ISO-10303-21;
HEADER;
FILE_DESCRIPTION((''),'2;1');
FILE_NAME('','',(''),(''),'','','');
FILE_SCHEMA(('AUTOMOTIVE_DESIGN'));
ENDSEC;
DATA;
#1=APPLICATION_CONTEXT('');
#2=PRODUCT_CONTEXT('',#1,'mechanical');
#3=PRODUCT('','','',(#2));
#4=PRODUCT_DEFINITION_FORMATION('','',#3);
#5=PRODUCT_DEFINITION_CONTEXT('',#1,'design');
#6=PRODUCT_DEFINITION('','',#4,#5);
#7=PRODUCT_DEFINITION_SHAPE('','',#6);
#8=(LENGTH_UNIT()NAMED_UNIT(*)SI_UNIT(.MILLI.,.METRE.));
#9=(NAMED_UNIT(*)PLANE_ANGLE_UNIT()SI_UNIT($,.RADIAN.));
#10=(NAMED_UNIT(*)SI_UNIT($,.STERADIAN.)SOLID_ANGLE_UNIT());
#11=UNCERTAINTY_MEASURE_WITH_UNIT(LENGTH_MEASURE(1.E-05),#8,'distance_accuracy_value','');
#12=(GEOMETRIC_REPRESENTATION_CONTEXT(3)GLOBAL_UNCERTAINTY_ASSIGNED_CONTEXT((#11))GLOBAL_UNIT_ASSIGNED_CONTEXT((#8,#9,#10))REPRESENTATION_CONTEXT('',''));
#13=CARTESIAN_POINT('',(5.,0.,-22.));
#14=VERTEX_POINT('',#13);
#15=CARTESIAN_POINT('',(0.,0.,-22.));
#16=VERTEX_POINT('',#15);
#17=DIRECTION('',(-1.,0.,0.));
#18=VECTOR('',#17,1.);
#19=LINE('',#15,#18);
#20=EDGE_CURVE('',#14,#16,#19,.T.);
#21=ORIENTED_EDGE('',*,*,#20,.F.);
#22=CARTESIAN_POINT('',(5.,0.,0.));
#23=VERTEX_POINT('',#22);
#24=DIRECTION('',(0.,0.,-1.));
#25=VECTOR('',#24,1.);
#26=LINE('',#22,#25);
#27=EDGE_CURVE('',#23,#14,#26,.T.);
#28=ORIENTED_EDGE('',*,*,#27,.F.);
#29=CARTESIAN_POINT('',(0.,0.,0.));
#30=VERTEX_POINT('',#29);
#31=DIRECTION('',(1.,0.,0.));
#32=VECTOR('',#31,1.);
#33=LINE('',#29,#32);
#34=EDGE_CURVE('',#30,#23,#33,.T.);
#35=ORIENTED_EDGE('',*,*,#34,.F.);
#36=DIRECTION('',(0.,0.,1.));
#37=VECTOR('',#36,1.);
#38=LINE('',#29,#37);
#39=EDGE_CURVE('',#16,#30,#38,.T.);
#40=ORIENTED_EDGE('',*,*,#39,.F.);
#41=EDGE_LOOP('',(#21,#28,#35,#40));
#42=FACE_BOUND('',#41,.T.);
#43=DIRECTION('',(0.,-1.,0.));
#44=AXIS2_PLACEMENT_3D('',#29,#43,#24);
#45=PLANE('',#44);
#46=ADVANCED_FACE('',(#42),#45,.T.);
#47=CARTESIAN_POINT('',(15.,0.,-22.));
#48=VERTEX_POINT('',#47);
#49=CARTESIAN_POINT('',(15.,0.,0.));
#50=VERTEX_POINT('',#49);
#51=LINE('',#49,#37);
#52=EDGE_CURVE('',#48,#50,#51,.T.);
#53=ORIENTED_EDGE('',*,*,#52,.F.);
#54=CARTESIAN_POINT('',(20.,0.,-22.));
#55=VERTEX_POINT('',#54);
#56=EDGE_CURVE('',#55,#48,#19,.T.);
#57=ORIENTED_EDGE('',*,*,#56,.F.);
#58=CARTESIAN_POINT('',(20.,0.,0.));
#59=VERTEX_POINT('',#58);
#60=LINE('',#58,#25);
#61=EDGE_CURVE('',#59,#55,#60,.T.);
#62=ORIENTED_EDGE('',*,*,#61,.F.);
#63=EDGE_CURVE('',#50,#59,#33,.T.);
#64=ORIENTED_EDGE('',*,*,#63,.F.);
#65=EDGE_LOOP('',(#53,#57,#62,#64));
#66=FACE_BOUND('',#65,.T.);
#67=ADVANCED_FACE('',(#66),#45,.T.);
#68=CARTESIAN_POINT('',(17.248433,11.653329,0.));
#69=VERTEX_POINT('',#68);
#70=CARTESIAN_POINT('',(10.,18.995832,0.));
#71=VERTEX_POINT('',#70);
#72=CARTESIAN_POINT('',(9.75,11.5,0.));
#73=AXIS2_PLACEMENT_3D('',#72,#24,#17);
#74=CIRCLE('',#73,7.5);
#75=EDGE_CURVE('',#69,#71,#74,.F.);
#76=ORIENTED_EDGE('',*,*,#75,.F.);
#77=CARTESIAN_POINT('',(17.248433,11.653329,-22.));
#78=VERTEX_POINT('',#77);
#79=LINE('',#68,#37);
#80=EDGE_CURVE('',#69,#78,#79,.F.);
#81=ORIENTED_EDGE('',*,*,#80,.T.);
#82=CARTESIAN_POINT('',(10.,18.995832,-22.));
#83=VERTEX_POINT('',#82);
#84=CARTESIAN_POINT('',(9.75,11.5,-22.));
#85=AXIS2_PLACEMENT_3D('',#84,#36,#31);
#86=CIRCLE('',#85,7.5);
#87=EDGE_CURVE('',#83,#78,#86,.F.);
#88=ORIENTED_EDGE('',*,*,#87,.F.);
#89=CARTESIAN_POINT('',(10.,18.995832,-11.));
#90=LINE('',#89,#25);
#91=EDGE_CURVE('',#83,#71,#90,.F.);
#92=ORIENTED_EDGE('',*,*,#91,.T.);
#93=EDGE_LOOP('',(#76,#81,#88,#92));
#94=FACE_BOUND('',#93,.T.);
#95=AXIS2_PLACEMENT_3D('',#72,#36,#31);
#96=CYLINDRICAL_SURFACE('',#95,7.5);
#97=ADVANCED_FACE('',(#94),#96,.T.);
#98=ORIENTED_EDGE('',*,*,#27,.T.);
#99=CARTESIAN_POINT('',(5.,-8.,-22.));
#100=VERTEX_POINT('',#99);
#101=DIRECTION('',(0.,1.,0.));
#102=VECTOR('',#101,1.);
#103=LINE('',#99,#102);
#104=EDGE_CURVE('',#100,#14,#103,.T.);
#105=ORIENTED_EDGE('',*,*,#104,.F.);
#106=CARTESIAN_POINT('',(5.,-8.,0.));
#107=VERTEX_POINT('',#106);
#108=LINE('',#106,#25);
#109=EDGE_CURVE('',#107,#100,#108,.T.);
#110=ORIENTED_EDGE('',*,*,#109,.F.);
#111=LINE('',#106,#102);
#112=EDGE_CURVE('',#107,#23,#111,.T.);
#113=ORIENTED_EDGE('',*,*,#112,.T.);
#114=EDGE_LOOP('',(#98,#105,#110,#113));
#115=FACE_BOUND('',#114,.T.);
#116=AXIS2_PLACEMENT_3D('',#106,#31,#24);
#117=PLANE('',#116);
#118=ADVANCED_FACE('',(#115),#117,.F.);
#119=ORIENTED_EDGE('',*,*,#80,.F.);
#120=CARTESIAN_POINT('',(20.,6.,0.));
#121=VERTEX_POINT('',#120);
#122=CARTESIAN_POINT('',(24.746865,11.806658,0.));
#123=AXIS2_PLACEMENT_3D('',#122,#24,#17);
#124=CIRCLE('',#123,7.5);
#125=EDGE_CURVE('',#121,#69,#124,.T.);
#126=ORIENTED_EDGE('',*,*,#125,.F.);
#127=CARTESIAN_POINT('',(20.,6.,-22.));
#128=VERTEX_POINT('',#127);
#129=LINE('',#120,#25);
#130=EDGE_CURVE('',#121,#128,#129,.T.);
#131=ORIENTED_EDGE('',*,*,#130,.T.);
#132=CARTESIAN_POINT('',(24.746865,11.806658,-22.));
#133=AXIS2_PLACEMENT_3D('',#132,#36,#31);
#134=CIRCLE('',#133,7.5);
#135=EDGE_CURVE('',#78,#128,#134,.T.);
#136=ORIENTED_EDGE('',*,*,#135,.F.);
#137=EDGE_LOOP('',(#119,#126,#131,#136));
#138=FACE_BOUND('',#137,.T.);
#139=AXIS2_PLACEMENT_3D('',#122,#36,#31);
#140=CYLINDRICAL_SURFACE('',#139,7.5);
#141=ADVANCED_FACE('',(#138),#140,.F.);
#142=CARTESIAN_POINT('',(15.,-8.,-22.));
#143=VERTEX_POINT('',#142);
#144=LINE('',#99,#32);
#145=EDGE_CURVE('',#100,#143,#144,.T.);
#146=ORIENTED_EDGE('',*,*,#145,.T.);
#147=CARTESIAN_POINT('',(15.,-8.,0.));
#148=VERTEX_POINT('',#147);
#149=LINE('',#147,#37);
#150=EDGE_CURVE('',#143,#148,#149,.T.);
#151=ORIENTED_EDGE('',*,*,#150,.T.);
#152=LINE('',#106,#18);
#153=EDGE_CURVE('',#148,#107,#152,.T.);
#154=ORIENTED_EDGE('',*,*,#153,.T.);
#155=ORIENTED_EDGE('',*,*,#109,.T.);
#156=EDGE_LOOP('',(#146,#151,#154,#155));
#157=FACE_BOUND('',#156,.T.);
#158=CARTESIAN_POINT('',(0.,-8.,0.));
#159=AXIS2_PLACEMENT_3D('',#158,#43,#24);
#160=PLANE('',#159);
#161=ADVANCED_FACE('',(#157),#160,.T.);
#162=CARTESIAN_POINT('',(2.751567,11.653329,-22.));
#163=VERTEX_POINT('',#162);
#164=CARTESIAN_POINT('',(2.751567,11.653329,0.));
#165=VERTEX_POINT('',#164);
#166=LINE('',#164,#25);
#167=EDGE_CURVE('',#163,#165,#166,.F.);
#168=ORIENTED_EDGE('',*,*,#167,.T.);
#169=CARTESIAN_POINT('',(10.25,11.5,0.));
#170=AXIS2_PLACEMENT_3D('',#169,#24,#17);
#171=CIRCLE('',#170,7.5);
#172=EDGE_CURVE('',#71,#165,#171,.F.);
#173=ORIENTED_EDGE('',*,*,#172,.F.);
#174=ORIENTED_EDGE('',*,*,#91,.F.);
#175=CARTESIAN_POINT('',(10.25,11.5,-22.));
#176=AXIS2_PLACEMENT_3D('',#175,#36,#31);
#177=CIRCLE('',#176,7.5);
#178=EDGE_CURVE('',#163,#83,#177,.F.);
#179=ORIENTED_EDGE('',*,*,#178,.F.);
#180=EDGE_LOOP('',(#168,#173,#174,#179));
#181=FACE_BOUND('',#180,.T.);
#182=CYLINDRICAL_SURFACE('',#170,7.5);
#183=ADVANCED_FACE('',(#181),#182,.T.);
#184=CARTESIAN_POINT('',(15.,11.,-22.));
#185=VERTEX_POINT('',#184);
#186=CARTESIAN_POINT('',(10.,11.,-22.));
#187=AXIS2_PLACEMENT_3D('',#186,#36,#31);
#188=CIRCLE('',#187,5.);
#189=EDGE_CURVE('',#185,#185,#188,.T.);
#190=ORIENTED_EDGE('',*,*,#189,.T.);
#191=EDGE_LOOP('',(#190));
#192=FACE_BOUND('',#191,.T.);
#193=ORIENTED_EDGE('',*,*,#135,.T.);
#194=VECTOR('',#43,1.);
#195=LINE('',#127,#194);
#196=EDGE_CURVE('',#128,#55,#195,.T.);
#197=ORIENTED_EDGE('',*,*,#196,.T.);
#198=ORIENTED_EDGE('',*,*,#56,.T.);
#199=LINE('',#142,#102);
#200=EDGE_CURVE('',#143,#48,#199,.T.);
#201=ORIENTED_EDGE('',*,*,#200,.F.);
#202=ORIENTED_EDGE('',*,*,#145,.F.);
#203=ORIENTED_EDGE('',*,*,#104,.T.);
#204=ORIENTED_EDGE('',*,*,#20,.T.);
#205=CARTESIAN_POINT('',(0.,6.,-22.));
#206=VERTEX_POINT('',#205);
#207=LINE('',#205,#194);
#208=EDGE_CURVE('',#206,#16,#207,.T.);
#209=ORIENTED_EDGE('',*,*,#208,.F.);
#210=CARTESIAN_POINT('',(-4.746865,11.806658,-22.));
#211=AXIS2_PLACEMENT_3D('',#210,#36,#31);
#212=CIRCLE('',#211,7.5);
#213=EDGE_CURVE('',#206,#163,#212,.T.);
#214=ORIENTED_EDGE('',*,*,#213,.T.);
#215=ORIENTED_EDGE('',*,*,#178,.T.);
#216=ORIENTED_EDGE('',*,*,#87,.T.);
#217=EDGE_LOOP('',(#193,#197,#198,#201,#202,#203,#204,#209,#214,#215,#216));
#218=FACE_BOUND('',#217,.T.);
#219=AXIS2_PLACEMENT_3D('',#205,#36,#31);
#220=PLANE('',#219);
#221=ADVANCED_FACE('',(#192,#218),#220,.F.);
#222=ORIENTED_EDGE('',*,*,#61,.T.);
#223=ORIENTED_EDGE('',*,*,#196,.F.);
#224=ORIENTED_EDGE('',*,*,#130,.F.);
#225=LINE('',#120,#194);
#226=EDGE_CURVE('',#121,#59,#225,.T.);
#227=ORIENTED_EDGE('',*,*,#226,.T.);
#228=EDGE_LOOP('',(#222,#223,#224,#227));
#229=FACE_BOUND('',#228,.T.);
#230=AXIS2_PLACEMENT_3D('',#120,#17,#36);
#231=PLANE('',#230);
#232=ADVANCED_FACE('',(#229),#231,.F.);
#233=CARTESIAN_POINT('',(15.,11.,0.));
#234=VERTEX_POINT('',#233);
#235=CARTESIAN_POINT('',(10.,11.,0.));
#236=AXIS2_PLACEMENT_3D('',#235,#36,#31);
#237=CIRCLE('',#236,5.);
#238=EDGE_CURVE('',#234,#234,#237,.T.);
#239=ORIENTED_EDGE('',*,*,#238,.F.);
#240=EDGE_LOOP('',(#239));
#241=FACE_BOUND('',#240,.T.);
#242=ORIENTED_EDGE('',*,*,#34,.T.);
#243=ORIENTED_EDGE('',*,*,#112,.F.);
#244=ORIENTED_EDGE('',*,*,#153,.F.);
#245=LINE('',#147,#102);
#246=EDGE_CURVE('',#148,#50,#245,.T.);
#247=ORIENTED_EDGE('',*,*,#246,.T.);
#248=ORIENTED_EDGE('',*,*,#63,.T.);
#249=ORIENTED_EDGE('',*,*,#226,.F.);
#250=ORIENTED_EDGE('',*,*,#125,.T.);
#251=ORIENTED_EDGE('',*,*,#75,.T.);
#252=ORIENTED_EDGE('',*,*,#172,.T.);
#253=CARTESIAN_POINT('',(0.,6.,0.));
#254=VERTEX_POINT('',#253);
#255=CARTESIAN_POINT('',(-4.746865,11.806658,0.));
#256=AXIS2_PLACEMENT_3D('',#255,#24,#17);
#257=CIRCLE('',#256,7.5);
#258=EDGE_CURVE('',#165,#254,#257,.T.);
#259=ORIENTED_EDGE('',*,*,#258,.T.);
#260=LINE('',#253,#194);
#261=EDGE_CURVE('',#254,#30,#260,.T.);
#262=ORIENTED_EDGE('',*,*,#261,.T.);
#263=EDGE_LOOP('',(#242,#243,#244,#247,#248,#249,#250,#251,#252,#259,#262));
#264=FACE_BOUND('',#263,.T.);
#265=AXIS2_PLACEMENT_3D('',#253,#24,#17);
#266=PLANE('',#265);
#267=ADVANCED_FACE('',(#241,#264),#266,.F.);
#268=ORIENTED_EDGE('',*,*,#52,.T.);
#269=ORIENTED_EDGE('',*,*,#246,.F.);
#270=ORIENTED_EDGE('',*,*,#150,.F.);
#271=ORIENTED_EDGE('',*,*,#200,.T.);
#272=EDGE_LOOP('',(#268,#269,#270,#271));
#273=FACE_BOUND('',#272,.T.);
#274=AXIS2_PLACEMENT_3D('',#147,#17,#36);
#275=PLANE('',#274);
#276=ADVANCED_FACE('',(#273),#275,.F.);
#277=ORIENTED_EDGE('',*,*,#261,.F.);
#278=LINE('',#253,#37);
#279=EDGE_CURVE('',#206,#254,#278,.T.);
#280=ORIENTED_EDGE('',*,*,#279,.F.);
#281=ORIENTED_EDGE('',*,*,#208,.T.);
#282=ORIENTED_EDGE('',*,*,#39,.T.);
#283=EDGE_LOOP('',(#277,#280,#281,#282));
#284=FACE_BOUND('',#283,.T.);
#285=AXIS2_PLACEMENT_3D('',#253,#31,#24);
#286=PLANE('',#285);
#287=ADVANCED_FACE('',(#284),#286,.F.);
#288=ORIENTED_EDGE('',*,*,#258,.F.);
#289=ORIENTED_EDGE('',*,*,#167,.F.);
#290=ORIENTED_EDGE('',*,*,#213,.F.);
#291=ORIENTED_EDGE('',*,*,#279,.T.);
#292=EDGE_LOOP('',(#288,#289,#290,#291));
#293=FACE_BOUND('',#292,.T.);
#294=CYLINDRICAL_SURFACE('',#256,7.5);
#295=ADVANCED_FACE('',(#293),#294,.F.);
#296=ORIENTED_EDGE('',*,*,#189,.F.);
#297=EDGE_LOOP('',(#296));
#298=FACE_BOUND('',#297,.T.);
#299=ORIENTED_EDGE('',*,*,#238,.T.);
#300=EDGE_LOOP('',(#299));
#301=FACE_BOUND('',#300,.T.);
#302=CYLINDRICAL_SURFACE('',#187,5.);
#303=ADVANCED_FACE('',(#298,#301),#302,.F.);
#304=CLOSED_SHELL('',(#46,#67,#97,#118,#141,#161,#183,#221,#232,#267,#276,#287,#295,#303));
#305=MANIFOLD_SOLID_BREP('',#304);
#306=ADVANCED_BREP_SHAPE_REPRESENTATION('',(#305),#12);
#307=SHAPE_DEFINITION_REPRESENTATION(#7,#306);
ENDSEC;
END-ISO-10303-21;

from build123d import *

# Parameters (mm, degrees)
SKETCH6_W           = 20
SKETCH6_H           = 22
BOSS_EXTRUDE5_DEPTH = 6
SKETCH7_W           = 10
SKETCH7_H           = 22
BOSS_EXTRUDE6_DEPTH = 8
SKETCH8_W           = 14.5
SKETCH8_H           = 22
BOSS_EXTRUDE7_DEPTH = 13
SKETCH9_R           = 5
CUT_EXTRUDE1_DEPTH  = 36.284557529
FILLET1_R           = 7.5
FILLET2_R           = 7.5


with BuildPart() as part:
    # Sketch6 → Boss-Extrude5 (new body)
    with BuildSketch(Plane(origin=(0, 0, 0), x_dir=(1, 0, 0), z_dir=(0, 1, 0))):
        with Locations((10, 11)):
            Rectangle(SKETCH6_W, SKETCH6_H)
    extrude(amount=BOSS_EXTRUDE5_DEPTH)

    # Sketch7 → Boss-Extrude6 (add)
    with BuildSketch(Plane.XZ):
        with Locations((10, -11)):
            Rectangle(SKETCH7_W, SKETCH7_H)
    extrude(amount=BOSS_EXTRUDE6_DEPTH)

    # Sketch8 → Boss-Extrude7 (add)
    with BuildSketch(Plane(origin=(0, 6, 0), x_dir=(1, 0, 0), z_dir=(0, 1, 0))):
        with Locations((10, 11)):
            Rectangle(SKETCH8_W, SKETCH8_H)
    extrude(amount=BOSS_EXTRUDE7_DEPTH)

    # Sketch9 → Cut-Extrude1 (cut, through all)
    with BuildSketch(Plane.XY):
        with Locations((10, 11)):
            Circle(SKETCH9_R)
    extrude(amount=-CUT_EXTRUDE1_DEPTH, mode=Mode.SUBTRACT)

    # Fillet1
    # the kernel refuses this fillet: 7.5 mm, written as the material it takes off along each edge
    with BuildSketch(Plane(origin=(17.25, 19, -40.75), x_dir=(-1, 0, 0), z_dir=(0, 0, 1))) as fillet1_piece_1:
        with BuildLine():
            CenterArc((FILLET1_R, FILLET1_R), FILLET1_R, 180, 90)
            Line((0, FILLET1_R), (0, 0))
            Line((0, 0), (FILLET1_R, 0))
        make_face()
    extrude(amount=59.5, mode=Mode.SUBTRACT)
    with BuildSketch(Plane(origin=(2.75, 19, 18.75), x_dir=(0, -1, 0), z_dir=(0, 0, -1))) as fillet1_piece_2:
        with BuildLine():
            CenterArc((FILLET1_R, -FILLET1_R), FILLET1_R, 90, 90)
            Line((0, -FILLET1_R), (0, 0))
            Line((0, 0), (FILLET1_R, 0))
        make_face()
    extrude(amount=59.5, mode=Mode.SUBTRACT)

    # Fillet2
    # the kernel refuses this fillet: 7.5 mm, written as the material it adds along each edge
    with BuildSketch(Plane(origin=(17.25, 6, -22), x_dir=(1, 0, 0), z_dir=(0, 0, 1))) as fillet2_piece_1:
        with BuildLine():
            CenterArc((7.496865043, 5.806657581), FILLET2_R, 181.171427285, 49.563032728)
            Line((-0.001567478, 5.65332879), (-0.75141073, 5.637995911))
            ThreePointArc((-0.75141073, 5.637995911), (-0.75, 5.5), (-0.75, 0))
            Line((-0.75, 0), (0, -0.75))
            ThreePointArc((0, -0.75), (1.375, -0.75), (2.275313496, -0.580665758))
            Line((2.275313496, -0.580665758), (2.75, 0))
        make_face()
    extrude(amount=22)
    with BuildSketch(Plane(origin=(2.75, 6, 0), x_dir=(0.00027726642617420565, 0.9999999615616638, 0), z_dir=(0, 0, -1))) as fillet2_piece_2:
        with BuildLine():
            CenterArc((5.804578729, -7.498474746), FILLET2_R, 91.155541089, 49.563032728)
            Line((-0.000762483, -2.749999894), (-0.581296604, -2.275152409))
            ThreePointArc((-0.581296604, -2.275152409), (-0.750381213, -1.374791997), (-0.749999971, 0.00020795))
            Line((-0.749999971, 0.00020795), (0.00020795, 0.749999971))
            ThreePointArc((0.00020795, 0.749999971), (5.500207738, 0.748475006), (5.638204036, 0.749847475))
            Line((5.638204036, 0.749847475), (5.653329008, 0))
        make_face()
    extrude(amount=22)


solid = part.part
